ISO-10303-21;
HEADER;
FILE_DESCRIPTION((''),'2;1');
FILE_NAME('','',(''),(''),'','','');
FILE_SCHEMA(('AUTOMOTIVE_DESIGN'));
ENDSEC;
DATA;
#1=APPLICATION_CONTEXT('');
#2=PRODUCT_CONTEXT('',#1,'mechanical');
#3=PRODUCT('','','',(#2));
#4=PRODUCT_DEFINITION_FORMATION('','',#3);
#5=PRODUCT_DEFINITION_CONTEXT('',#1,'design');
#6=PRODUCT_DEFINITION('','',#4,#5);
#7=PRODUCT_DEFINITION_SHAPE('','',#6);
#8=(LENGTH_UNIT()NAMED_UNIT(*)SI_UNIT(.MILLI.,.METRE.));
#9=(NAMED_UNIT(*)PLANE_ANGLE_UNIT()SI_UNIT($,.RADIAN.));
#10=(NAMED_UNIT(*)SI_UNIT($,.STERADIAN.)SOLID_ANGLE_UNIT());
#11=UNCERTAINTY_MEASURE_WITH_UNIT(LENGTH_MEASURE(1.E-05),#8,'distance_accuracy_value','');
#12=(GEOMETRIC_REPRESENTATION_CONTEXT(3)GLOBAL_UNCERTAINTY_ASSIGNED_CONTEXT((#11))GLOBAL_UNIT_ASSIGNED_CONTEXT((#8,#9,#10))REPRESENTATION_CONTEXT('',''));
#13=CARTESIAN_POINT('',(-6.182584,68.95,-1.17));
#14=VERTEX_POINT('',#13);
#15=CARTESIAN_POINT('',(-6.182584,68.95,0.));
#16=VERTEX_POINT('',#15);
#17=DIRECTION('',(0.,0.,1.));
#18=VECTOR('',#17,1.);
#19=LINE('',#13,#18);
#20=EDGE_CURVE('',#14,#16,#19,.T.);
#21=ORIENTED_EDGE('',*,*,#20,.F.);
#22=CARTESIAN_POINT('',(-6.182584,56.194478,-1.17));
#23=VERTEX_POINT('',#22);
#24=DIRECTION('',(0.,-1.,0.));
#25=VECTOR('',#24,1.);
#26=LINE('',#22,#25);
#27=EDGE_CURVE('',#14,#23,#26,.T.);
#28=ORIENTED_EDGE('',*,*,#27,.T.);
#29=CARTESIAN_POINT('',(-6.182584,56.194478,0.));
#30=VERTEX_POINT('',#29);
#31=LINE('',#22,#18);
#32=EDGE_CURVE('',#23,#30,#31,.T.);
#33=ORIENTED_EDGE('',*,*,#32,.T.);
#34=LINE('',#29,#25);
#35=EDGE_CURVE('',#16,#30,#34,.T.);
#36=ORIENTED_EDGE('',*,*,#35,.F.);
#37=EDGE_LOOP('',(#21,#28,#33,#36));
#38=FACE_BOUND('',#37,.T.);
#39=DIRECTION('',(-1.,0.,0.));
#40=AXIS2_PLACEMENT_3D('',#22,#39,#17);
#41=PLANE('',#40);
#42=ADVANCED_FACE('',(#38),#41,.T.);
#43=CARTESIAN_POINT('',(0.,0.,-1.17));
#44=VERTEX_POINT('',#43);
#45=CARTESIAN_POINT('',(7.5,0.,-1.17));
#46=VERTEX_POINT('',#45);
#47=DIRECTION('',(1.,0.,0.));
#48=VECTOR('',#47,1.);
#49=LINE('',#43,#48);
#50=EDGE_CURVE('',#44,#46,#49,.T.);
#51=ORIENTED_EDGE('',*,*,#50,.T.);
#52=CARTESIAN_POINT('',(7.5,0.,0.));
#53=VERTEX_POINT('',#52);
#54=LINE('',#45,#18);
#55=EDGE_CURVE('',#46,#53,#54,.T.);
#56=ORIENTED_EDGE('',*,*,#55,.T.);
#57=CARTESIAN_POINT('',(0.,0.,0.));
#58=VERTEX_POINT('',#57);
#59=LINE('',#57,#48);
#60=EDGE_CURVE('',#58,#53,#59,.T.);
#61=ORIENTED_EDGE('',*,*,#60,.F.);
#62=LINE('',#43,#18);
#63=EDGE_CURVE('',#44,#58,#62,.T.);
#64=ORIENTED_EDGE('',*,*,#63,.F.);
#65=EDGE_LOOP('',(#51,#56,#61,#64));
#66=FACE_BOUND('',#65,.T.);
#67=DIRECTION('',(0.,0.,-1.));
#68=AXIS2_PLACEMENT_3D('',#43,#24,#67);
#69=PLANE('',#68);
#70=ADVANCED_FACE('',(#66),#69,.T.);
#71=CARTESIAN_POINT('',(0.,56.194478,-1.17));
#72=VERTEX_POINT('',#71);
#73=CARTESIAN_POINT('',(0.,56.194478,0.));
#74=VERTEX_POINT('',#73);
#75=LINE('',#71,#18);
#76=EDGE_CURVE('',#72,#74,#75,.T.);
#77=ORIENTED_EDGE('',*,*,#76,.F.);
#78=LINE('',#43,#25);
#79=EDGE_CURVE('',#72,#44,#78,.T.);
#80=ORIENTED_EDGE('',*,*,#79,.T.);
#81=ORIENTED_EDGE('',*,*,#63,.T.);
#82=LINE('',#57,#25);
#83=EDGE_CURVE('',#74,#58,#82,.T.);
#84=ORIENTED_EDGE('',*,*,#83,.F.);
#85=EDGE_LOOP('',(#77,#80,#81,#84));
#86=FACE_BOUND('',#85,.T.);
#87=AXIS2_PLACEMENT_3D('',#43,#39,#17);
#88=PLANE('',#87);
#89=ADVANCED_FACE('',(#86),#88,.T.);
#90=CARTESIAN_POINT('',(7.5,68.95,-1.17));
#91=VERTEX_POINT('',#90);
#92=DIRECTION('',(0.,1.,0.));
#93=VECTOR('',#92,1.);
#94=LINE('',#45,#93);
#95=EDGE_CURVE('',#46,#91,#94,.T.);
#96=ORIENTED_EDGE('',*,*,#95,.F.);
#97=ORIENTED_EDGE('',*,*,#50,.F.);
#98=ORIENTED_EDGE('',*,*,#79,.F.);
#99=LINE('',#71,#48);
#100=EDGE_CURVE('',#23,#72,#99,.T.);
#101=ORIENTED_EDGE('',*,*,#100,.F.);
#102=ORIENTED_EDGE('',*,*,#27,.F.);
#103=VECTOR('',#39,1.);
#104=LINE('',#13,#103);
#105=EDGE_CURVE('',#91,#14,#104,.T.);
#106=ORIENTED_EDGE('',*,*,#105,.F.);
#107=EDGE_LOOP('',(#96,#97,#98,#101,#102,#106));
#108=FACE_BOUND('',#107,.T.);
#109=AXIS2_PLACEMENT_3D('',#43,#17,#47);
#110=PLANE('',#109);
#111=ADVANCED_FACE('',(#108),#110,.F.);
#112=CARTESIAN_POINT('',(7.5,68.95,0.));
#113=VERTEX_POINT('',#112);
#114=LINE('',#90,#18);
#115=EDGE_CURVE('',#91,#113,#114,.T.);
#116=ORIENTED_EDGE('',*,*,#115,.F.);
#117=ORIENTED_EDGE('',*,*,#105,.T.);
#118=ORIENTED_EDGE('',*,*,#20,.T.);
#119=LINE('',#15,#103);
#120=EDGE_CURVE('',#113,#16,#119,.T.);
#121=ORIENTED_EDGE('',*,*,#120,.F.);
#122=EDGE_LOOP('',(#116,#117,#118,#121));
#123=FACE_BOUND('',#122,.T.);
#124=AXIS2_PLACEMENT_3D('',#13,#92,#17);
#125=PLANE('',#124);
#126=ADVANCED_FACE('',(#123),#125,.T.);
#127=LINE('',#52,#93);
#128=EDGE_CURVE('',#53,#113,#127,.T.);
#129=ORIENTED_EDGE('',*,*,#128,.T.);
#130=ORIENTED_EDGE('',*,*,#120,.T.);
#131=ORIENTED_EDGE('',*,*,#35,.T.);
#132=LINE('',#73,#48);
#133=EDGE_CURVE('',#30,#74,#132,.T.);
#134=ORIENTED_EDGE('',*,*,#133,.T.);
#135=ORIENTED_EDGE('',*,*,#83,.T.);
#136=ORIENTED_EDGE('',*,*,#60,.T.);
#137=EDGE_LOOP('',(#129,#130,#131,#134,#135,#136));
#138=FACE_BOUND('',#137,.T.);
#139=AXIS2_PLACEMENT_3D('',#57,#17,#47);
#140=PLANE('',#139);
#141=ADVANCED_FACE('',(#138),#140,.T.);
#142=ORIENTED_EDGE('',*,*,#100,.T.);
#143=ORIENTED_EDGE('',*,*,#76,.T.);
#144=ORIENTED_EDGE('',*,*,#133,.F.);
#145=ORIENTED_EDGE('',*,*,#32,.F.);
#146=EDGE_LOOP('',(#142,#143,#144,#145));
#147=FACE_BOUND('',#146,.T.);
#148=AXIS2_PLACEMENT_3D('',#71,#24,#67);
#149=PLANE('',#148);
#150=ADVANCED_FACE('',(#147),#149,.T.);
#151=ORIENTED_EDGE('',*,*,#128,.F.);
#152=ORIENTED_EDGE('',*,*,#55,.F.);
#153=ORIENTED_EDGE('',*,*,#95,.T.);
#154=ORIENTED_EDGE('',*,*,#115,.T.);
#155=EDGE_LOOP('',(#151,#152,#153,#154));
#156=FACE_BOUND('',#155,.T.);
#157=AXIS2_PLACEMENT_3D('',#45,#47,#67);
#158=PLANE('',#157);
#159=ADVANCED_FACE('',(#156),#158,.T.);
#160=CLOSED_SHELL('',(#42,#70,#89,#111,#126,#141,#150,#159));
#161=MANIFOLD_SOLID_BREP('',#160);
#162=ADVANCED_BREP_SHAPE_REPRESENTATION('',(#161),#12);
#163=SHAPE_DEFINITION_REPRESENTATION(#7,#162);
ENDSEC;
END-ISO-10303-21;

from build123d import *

# Parameters (mm, degrees)
BASE_FLANGE1_DEPTH = 1.17


# Sheet-metal steps are written as plain solids
with BuildPart() as part:
    # Sketch1 → Base-Flange1 (new body)
    with BuildSketch(Plane.XY):
        Polygon((0, 0), (7.5, 0), (7.5, 68.95), (-6.182584309, 68.95), (-6.182584309, 56.194477701), (0, 56.194477701), align=None)
    extrude(amount=-BASE_FLANGE1_DEPTH)


solid = part.part
